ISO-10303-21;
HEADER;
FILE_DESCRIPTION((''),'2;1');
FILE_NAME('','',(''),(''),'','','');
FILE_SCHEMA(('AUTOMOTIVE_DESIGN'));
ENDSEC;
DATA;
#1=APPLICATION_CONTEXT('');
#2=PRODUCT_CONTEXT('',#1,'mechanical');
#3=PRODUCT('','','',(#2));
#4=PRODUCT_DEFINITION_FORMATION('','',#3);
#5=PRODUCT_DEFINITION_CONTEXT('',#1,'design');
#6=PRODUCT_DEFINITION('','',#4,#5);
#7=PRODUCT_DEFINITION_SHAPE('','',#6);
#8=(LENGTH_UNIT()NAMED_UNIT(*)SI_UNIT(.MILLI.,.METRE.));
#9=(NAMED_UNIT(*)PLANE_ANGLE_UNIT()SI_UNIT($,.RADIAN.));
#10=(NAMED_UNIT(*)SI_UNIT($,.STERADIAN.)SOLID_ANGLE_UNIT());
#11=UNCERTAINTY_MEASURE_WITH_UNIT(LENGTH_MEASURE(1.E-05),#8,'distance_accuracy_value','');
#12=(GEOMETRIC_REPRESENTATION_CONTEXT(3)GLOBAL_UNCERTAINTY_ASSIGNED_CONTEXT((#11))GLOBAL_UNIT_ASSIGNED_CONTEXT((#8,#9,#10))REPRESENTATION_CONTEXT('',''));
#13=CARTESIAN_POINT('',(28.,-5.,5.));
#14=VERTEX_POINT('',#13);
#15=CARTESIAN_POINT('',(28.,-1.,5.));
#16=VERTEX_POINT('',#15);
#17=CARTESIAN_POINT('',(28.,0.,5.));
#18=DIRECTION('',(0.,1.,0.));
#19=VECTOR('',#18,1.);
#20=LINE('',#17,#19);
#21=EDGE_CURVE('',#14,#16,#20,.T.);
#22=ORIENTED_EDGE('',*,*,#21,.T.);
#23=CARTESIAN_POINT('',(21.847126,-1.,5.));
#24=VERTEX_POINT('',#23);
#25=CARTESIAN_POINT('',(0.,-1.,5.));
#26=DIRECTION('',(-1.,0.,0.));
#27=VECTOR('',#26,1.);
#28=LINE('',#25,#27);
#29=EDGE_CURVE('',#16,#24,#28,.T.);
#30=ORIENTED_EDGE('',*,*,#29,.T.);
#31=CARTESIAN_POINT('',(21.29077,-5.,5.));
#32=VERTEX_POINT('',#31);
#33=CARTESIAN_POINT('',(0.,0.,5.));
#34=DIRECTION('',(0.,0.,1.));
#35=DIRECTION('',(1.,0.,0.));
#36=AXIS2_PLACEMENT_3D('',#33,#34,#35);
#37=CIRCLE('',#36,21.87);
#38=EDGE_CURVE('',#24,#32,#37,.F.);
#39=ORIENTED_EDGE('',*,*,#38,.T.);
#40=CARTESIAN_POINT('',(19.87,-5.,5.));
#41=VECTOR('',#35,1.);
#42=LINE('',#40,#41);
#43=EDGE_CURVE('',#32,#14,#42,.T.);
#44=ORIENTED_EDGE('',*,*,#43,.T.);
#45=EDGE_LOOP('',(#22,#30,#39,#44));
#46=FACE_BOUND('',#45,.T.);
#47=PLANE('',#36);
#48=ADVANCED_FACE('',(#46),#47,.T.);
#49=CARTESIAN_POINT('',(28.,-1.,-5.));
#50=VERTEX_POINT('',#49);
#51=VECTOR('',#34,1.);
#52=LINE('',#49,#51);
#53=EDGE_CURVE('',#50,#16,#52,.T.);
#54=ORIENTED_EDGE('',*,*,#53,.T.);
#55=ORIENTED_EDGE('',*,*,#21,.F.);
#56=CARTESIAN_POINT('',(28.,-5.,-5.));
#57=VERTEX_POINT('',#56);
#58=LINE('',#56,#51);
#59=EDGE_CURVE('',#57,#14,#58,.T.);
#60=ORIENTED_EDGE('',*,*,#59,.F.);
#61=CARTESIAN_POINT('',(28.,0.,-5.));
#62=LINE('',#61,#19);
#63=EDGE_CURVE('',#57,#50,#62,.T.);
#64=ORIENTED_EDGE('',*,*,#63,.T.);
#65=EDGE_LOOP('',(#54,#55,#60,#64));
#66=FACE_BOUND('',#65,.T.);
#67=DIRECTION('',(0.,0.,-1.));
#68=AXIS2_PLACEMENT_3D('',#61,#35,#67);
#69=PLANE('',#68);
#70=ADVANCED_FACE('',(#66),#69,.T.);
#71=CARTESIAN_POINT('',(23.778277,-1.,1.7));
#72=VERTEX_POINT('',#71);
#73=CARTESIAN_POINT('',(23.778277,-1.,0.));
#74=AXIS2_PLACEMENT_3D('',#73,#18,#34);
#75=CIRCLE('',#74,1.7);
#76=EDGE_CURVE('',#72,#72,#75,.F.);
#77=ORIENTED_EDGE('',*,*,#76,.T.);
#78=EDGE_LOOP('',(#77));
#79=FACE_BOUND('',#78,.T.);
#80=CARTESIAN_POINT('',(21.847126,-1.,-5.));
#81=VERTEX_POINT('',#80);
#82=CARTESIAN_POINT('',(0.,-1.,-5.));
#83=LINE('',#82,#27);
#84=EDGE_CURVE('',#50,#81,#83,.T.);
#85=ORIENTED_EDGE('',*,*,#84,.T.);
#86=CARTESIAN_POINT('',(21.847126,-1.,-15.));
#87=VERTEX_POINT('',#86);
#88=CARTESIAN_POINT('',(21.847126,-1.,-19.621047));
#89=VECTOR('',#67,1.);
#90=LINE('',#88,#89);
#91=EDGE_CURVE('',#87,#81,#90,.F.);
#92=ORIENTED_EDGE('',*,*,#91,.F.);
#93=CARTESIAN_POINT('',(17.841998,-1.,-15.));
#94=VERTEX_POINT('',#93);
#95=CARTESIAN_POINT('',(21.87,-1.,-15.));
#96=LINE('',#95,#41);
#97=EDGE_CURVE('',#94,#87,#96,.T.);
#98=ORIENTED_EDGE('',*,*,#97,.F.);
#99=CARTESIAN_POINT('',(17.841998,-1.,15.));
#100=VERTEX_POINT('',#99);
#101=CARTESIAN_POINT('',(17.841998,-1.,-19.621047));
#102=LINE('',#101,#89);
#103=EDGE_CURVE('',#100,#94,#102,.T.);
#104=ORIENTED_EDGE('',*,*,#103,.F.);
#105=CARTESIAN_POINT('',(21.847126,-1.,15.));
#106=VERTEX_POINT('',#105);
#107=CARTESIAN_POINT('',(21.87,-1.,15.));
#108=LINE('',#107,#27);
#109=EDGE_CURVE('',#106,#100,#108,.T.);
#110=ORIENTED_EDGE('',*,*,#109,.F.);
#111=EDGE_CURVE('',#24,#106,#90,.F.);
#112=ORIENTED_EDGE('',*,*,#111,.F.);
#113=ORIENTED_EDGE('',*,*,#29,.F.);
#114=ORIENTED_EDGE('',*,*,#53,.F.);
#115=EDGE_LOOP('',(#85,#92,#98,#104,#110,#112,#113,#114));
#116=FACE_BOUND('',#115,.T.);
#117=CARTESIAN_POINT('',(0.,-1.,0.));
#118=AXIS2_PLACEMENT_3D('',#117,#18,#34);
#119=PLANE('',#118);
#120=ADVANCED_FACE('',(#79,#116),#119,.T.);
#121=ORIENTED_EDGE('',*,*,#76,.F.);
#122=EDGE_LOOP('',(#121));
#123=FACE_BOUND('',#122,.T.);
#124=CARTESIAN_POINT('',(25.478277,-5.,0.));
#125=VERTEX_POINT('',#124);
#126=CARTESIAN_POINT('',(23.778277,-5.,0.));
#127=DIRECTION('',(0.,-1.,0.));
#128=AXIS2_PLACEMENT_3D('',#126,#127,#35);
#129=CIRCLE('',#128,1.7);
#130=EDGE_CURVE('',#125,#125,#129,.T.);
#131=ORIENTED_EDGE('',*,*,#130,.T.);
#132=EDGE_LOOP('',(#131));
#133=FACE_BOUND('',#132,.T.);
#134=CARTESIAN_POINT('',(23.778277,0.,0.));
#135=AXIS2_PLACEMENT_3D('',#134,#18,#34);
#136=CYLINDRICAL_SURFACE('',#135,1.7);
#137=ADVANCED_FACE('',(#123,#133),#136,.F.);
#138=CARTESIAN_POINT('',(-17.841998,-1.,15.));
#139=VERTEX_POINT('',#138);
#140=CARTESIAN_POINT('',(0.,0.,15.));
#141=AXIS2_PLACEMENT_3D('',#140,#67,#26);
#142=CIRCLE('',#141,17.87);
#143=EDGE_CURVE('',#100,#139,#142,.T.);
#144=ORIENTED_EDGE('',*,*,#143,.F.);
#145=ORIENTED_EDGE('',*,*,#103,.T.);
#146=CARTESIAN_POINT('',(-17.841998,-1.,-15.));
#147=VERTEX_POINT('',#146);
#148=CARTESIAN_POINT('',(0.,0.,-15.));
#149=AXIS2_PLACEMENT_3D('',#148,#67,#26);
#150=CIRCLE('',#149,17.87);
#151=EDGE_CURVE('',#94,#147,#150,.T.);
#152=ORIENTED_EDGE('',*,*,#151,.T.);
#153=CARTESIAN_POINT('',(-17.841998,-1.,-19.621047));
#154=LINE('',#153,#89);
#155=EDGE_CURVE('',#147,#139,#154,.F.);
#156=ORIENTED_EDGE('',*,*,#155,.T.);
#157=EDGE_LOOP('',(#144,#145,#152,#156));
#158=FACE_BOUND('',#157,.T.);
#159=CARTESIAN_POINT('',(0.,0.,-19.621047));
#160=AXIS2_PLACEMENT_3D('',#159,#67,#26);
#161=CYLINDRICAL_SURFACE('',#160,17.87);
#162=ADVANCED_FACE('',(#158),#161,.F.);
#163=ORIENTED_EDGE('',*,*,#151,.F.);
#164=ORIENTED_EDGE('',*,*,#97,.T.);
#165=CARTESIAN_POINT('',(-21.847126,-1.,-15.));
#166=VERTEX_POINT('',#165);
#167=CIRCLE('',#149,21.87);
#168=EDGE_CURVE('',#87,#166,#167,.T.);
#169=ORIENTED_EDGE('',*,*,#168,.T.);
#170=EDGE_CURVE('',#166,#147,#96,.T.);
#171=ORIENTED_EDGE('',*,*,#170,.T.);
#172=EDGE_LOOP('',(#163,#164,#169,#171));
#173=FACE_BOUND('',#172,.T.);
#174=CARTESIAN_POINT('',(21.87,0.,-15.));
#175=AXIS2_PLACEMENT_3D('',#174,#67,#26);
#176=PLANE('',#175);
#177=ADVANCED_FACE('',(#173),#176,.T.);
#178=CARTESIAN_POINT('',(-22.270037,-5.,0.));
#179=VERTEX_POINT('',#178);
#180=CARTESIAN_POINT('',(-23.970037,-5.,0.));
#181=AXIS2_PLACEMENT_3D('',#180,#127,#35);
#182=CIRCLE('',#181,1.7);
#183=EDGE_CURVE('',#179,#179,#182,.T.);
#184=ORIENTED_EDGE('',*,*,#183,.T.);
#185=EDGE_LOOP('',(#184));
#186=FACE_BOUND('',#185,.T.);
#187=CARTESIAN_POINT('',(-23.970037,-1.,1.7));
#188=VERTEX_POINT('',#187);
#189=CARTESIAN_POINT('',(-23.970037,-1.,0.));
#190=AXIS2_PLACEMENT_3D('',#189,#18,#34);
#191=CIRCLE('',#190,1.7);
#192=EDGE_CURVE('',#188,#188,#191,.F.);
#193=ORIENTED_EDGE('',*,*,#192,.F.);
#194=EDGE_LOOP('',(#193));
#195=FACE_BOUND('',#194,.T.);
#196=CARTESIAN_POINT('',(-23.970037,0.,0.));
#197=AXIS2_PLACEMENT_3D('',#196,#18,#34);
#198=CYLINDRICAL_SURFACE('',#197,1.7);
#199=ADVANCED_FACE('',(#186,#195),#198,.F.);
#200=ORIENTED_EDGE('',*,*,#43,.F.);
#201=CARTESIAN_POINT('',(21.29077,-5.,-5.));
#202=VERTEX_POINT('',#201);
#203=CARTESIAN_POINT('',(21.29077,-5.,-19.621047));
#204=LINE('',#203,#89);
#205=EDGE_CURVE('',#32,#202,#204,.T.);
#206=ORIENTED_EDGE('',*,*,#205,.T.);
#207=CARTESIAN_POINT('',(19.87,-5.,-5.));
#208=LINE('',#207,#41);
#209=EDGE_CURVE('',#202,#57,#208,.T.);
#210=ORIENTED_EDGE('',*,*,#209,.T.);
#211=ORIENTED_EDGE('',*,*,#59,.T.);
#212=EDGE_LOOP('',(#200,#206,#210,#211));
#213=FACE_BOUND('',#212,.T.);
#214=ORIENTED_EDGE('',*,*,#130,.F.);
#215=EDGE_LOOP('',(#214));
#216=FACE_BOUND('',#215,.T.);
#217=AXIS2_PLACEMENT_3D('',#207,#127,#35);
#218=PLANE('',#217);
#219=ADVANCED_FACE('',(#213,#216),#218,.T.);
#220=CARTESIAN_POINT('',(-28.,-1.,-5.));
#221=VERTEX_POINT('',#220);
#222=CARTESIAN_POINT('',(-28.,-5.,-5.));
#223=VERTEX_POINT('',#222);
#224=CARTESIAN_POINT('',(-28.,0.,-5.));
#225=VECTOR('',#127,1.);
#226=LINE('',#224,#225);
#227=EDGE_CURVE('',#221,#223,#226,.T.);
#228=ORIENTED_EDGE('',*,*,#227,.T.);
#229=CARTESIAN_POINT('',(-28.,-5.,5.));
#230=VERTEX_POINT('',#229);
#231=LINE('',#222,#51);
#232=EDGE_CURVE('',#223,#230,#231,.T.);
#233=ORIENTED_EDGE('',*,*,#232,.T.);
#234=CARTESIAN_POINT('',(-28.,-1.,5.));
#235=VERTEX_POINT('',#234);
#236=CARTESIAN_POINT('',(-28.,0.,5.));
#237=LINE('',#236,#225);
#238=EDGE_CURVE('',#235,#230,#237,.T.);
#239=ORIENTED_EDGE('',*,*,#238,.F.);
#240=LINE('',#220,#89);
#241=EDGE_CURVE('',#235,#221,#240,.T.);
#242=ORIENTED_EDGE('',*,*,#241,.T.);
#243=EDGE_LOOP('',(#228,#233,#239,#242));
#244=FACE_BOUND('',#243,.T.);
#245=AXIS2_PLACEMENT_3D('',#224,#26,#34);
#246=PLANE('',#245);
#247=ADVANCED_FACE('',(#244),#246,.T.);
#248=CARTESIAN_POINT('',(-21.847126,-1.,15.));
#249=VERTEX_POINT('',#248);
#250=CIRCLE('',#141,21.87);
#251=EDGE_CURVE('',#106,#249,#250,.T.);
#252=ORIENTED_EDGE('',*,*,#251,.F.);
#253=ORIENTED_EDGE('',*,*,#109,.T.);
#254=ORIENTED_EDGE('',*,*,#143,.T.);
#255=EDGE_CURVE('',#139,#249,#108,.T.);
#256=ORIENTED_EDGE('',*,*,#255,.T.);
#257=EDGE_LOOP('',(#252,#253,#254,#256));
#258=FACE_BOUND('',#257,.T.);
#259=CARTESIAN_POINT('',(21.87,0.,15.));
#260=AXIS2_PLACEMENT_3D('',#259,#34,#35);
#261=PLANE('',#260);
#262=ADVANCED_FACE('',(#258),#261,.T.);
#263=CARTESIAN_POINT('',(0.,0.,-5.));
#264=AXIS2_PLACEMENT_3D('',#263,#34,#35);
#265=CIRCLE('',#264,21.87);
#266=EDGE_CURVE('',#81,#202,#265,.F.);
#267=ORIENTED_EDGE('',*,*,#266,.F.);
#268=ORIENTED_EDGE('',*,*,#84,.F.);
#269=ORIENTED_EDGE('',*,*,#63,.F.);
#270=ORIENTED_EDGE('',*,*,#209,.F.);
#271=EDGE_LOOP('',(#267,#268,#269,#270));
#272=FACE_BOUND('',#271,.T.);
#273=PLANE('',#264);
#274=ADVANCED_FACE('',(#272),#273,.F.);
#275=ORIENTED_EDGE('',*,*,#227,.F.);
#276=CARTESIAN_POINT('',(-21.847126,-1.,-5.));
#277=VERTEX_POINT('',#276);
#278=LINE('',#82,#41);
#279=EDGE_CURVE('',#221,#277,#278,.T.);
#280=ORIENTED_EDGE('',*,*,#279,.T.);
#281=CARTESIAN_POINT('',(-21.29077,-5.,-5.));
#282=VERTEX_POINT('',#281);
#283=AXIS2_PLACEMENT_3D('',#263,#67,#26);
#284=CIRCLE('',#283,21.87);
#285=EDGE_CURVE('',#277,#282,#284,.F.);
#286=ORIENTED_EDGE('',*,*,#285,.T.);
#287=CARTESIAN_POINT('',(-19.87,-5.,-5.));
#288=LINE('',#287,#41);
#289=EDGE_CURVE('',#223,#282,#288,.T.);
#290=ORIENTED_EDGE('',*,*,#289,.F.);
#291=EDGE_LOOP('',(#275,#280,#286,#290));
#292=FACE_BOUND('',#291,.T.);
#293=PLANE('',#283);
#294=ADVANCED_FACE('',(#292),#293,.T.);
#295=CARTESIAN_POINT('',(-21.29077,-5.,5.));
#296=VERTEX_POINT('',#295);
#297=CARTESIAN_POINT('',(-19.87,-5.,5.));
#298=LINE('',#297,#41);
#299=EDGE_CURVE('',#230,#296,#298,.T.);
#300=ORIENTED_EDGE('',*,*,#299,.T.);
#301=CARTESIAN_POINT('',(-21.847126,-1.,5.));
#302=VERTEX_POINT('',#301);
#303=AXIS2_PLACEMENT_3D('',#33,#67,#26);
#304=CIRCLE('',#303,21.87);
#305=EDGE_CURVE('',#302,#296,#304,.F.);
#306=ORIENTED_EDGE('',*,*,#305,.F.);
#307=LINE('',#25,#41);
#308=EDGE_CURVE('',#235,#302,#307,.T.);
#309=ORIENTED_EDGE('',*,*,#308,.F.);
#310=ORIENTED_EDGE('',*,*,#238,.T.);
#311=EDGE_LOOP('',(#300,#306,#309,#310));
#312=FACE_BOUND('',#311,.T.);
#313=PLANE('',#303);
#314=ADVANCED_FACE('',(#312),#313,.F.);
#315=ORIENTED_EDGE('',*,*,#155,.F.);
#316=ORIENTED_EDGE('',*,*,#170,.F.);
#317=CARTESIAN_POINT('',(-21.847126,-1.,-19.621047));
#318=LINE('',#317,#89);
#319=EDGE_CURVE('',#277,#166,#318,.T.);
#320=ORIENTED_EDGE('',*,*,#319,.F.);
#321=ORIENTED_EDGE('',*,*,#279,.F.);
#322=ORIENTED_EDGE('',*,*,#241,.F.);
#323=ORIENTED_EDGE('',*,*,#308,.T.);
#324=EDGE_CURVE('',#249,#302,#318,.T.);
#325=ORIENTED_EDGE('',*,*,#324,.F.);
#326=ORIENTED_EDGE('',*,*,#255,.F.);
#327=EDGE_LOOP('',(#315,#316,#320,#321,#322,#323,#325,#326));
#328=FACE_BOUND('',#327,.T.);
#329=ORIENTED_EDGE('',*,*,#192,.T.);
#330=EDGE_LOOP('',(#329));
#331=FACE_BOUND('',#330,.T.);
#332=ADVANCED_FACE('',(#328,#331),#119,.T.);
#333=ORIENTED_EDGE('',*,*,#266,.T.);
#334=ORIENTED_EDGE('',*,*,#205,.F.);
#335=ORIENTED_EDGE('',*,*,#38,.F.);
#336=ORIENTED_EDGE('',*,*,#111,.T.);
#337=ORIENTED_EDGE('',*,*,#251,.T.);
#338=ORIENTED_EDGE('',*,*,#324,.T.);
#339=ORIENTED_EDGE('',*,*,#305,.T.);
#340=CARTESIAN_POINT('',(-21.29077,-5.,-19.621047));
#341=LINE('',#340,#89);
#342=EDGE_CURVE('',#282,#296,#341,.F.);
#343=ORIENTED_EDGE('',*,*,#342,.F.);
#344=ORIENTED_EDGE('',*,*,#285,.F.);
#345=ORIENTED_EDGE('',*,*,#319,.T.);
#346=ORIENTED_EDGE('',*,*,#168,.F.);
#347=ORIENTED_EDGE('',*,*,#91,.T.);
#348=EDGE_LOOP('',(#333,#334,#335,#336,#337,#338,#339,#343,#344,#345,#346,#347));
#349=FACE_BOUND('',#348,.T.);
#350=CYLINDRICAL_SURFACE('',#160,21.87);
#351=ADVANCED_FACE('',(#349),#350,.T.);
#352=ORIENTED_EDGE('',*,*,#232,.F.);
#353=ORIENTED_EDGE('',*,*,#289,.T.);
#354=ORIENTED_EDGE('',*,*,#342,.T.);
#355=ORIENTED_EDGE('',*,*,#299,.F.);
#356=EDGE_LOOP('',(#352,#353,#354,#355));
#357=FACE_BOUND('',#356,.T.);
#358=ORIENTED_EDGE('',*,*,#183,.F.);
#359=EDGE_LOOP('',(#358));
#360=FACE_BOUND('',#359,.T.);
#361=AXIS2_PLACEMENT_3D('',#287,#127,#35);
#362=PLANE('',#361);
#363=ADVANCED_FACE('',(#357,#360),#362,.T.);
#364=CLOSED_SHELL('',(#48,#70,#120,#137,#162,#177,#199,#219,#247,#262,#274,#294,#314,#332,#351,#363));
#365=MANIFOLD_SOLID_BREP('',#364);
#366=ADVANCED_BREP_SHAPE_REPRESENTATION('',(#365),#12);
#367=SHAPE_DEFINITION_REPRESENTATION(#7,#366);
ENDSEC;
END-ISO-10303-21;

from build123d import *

# Parameters (mm, degrees)
SKETCH1_W                = 4
SKETCH1_H                = 30
REVOLVE1_ANGLE           = 180
BOSS_EXTRUDE3_DEPTH      = 5
BOSS_EXTRUDE3_DEPTH_BACK = 5
SKETCH6_W                = 8.13
SKETCH6_H                = 5
M3_CLEARANCE_HOLE1_D     = 3.4
M3_CLEARANCE_HOLE1_DEPTH = 8.87
M3_CLEARANCE_HOLE1_TIP   = 1.021463052
SKETCH11_W               = 62.08504313
SKETCH11_H               = 41.873291452
CUT_EXTRUDE1_DEPTH       = 1


with BuildPart() as part:
    # Sketch1 → Revolve1 (revolve)
    with BuildSketch(Plane(origin=(0, 0, 0), x_dir=(1, 0, 0), z_dir=(0, 1, 0))):
        with Locations((-19.87, 0)):
            Rectangle(SKETCH1_W, SKETCH1_H)
    revolve(axis=Axis((0, 0, -19.621046531), (0, 0, 1)), revolution_arc=REVOLVE1_ANGLE)

    # Sketch6 → Boss-Extrude3 (add, two sides: drawn at the far end of the back side and taken through both)
    with BuildSketch(Plane.XY.offset(-BOSS_EXTRUDE3_DEPTH_BACK)):
        with Locations((-23.935, -2.5)):
            Rectangle(SKETCH6_W, SKETCH6_H)
        with Locations((23.935, -2.5)):
            Rectangle(SKETCH6_W, SKETCH6_H)
    extrude(amount=BOSS_EXTRUDE3_DEPTH + BOSS_EXTRUDE3_DEPTH_BACK)

    # M3 Clearance Hole1
    with Locations(Plane(origin=(0, 0, 0), x_dir=(1, 0, 0), z_dir=(0, 1, 0))):
        with Locations((-23.970037453, 0), (23.778277154, 0)):
            Hole(M3_CLEARANCE_HOLE1_D / 2, depth=M3_CLEARANCE_HOLE1_DEPTH)
            with Locations((0, 0, -(M3_CLEARANCE_HOLE1_DEPTH + M3_CLEARANCE_HOLE1_TIP / 2))):  # 118° drill point
                Cone(0, M3_CLEARANCE_HOLE1_D / 2, M3_CLEARANCE_HOLE1_TIP, mode=Mode.SUBTRACT)

    # Sketch11 → Cut-Extrude1 (cut)
    with BuildSketch(Plane(origin=(0, 0, 0), x_dir=(1, 0, 0), z_dir=(0, 1, 0))):
        Rectangle(SKETCH11_W, SKETCH11_H)
    extrude(amount=-CUT_EXTRUDE1_DEPTH, mode=Mode.SUBTRACT)


solid = part.part
